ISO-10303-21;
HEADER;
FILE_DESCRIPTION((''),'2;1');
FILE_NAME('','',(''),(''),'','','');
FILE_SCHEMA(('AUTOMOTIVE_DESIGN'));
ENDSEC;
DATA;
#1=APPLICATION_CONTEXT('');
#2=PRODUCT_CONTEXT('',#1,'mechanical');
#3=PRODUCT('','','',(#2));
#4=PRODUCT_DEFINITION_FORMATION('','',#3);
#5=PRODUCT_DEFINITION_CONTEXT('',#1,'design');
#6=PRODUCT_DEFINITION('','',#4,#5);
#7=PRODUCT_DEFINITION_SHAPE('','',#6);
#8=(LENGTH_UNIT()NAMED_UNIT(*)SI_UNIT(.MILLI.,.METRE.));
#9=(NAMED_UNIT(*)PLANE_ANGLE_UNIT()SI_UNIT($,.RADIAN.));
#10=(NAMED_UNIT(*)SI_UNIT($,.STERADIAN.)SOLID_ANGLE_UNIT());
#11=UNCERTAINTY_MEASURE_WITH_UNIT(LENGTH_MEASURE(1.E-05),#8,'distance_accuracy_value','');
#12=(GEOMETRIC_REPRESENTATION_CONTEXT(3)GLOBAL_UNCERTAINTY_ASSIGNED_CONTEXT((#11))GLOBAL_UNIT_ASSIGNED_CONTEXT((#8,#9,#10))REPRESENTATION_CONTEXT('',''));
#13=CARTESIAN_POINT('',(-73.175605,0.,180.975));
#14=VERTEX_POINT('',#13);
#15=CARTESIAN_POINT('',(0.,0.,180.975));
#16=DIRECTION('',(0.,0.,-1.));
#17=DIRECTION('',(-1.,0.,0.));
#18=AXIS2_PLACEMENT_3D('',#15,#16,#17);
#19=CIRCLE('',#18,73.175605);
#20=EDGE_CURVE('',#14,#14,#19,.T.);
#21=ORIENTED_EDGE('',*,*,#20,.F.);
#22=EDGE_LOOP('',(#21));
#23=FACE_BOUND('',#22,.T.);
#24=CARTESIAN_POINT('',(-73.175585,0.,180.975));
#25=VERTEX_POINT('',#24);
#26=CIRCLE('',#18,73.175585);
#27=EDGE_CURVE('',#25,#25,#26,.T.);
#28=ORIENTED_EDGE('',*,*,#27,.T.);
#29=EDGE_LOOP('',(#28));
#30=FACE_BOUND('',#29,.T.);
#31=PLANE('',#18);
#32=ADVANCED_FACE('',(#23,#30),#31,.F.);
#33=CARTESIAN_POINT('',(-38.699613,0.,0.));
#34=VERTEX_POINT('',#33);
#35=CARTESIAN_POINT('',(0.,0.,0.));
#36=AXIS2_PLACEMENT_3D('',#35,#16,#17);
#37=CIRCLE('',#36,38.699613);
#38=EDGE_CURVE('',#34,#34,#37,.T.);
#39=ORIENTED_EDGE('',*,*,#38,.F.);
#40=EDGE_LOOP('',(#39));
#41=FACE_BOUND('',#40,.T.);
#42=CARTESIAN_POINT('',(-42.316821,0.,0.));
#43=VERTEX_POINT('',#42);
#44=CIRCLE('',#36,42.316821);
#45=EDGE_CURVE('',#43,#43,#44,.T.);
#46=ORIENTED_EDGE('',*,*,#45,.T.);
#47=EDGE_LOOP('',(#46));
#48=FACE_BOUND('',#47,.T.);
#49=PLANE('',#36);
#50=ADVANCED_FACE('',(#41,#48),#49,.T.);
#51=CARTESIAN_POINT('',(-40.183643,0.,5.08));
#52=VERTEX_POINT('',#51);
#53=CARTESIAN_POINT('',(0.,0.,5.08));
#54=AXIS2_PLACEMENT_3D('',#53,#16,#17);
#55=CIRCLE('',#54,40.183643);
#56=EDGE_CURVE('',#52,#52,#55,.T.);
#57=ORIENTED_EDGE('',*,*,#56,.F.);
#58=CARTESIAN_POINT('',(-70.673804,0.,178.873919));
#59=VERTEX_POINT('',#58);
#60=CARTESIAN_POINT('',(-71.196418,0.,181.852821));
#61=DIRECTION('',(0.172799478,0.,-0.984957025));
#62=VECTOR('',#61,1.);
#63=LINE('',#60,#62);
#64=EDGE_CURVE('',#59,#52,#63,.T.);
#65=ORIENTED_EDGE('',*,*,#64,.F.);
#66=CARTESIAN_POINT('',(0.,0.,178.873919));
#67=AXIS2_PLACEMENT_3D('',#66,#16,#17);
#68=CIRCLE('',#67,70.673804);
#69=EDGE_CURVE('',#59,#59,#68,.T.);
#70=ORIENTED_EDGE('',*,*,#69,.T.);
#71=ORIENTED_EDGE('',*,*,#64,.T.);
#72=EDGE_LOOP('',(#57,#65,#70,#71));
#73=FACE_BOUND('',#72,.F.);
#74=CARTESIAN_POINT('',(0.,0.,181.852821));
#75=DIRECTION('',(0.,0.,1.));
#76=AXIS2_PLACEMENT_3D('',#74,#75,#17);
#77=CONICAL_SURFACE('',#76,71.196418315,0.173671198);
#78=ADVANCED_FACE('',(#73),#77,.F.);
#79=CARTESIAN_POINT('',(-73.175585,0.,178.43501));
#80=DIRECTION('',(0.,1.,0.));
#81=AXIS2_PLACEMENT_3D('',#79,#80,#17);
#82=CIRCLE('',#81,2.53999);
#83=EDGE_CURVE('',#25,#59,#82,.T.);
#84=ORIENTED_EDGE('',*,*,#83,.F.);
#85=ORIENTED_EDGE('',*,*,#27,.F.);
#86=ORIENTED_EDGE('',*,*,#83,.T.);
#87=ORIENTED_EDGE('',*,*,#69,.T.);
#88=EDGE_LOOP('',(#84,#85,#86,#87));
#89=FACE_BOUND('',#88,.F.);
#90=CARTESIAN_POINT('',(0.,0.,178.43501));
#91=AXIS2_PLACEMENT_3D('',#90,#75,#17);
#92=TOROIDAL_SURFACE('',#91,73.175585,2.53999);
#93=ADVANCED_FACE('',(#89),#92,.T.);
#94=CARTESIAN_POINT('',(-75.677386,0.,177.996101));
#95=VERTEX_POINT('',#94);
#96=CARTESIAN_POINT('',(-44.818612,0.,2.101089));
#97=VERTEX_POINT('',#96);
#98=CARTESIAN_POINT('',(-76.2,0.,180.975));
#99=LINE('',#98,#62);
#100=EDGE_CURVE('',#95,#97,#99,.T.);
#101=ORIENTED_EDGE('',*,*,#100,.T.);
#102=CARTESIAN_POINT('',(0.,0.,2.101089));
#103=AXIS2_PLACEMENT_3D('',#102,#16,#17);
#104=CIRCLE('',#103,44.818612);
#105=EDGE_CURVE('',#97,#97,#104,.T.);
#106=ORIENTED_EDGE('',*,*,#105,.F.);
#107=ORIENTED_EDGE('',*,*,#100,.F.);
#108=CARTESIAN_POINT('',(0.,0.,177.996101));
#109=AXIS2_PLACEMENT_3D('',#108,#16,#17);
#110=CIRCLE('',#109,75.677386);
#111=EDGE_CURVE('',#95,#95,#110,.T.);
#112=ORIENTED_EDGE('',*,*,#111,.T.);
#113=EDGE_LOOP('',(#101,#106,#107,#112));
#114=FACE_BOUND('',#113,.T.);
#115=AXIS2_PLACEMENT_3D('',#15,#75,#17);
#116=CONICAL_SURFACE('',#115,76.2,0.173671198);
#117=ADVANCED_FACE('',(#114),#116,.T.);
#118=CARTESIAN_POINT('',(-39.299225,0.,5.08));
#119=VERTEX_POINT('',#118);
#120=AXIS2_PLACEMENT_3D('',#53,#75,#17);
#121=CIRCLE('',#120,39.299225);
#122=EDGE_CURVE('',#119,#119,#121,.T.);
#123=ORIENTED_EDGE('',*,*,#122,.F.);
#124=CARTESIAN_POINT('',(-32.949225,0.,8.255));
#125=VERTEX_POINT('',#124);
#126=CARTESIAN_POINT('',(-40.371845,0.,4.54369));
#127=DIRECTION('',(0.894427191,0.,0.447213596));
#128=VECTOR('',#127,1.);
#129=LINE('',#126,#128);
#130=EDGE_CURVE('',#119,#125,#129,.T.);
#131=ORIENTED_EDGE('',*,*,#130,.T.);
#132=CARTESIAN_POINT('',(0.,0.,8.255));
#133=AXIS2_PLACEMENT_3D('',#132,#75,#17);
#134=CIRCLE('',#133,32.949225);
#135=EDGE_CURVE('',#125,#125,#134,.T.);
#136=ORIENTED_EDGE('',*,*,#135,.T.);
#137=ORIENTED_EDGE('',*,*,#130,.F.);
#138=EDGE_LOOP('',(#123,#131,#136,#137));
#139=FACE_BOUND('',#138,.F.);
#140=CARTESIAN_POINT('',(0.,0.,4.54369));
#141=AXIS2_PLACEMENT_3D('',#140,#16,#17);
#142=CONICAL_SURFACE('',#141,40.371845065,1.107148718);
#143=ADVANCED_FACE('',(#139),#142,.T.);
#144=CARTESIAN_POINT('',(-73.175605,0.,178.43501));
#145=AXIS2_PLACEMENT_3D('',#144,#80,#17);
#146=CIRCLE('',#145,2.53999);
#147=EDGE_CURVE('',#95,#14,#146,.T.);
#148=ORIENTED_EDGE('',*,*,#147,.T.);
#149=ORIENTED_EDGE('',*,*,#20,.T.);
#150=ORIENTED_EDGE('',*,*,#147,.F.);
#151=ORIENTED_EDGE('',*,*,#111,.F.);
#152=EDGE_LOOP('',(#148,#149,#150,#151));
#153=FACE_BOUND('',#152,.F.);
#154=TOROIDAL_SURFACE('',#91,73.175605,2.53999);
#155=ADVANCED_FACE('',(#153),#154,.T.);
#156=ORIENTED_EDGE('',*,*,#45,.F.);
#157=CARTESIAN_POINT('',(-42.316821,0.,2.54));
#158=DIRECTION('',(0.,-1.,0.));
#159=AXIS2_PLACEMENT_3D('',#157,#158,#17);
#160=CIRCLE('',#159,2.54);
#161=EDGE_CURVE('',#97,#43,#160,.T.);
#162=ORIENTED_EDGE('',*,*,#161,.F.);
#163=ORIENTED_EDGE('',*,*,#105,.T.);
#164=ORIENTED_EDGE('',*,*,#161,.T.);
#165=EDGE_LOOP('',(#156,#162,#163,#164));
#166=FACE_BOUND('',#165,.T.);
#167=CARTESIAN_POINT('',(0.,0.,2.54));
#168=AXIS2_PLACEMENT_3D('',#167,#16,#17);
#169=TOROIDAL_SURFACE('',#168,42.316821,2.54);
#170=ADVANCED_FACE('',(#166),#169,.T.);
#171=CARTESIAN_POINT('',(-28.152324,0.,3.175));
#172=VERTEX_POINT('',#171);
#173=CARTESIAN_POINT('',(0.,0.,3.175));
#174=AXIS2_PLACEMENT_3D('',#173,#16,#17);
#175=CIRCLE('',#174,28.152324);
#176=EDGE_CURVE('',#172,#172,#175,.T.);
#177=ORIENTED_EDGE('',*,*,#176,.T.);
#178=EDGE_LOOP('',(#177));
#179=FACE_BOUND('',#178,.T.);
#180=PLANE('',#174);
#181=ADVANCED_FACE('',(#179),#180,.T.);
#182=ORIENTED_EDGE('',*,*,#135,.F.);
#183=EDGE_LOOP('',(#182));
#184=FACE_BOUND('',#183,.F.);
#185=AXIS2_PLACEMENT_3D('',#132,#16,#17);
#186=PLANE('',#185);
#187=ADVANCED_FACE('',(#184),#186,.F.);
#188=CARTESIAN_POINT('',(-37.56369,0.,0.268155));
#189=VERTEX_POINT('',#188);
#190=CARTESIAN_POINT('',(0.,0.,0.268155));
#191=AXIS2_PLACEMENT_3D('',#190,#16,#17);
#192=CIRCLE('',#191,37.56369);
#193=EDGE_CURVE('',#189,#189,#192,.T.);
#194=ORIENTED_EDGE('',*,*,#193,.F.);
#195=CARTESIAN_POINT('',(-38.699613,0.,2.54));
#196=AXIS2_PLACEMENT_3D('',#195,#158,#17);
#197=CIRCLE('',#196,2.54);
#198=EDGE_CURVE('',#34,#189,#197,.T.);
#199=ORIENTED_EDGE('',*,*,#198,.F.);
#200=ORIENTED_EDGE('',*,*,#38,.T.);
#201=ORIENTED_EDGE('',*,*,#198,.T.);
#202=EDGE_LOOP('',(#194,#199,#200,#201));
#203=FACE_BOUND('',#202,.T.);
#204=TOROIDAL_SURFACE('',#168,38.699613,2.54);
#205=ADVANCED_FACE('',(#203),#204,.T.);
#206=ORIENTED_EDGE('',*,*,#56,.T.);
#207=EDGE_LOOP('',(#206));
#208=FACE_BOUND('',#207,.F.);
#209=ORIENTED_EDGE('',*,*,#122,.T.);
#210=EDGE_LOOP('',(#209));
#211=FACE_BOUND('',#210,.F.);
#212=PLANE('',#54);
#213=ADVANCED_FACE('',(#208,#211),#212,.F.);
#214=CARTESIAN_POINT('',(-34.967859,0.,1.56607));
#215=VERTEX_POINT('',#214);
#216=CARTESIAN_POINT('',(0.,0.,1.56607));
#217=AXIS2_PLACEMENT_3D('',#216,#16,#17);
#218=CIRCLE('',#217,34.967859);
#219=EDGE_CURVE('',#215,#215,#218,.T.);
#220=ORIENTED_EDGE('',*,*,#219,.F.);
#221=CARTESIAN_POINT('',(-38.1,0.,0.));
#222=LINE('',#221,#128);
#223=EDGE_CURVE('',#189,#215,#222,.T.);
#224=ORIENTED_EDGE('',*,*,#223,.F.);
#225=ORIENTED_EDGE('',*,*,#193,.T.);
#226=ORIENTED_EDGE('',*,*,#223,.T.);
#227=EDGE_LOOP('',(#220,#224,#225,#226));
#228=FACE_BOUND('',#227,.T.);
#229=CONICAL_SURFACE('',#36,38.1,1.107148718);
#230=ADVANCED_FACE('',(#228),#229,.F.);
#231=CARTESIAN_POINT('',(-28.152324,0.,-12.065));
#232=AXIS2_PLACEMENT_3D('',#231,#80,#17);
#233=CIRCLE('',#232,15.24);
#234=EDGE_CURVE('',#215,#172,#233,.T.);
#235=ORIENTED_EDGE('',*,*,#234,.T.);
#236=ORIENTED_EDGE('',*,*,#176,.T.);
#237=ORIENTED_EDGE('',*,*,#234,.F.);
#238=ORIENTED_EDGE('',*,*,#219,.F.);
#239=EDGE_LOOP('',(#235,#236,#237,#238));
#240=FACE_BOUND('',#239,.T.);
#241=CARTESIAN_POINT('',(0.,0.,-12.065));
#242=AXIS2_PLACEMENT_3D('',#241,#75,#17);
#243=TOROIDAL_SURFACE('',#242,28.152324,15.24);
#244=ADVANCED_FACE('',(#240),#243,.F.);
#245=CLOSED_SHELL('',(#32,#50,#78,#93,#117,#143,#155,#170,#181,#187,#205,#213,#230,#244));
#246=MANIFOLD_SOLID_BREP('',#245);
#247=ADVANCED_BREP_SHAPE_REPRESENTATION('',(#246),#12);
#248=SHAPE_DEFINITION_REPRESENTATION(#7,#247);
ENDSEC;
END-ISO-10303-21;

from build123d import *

# Parameters (mm, degrees)
F2_T = -5.08
F3_R = 2.53999
F4_R = 2.54
F5_R = 15.24


# Not quite as in the source:
# - a fillet or chamfer is up to 0.001 mm smaller than in the source, because OpenCascade refuses the exact size


with BuildPart() as f1:
    # F0 (on Front) → F1 (revolve)
    with BuildSketch(Plane.XZ):
        Polygon((-31.75, 3.175), (0, 3.175), (0, 180.975), (-76.2, 180.975), (-44.45, 0), (-38.1, 0), align=None)
    revolve(axis=Axis((0, 0, 92.075), (0, 0, -1)))

    # F2
    f2_openings = [f1.faces().sort_by_distance(p)[0] for p in [
        (0, 0, 180.975),
    ]]
    offset(amount=F2_T, openings=f2_openings, kind=Kind.INTERSECTION)

    # F3 (radius 2.54 in the source; OpenCascade refuses exactly that, so slightly less here)
    f3_edges = [f1.edges().sort_by_distance(p)[0] for p in [
        (76.2, 0, 180.975),
        (71.042415, 0, 180.975),
    ]]
    fillet(f3_edges, radius=F3_R)

    # F4
    f4_edges = [f1.edges().sort_by_distance(p)[0] for p in [
        (44.45, 0, 0),
        (38.1, 0, 0),
    ]]
    fillet(f4_edges, radius=F4_R)

    # F5
    f5_edges = [f1.edges().sort_by_distance(p)[0] for p in [
        (31.75, 0, 3.175),
    ]]
    fillet(f5_edges, radius=F5_R)


solid = f1.part
